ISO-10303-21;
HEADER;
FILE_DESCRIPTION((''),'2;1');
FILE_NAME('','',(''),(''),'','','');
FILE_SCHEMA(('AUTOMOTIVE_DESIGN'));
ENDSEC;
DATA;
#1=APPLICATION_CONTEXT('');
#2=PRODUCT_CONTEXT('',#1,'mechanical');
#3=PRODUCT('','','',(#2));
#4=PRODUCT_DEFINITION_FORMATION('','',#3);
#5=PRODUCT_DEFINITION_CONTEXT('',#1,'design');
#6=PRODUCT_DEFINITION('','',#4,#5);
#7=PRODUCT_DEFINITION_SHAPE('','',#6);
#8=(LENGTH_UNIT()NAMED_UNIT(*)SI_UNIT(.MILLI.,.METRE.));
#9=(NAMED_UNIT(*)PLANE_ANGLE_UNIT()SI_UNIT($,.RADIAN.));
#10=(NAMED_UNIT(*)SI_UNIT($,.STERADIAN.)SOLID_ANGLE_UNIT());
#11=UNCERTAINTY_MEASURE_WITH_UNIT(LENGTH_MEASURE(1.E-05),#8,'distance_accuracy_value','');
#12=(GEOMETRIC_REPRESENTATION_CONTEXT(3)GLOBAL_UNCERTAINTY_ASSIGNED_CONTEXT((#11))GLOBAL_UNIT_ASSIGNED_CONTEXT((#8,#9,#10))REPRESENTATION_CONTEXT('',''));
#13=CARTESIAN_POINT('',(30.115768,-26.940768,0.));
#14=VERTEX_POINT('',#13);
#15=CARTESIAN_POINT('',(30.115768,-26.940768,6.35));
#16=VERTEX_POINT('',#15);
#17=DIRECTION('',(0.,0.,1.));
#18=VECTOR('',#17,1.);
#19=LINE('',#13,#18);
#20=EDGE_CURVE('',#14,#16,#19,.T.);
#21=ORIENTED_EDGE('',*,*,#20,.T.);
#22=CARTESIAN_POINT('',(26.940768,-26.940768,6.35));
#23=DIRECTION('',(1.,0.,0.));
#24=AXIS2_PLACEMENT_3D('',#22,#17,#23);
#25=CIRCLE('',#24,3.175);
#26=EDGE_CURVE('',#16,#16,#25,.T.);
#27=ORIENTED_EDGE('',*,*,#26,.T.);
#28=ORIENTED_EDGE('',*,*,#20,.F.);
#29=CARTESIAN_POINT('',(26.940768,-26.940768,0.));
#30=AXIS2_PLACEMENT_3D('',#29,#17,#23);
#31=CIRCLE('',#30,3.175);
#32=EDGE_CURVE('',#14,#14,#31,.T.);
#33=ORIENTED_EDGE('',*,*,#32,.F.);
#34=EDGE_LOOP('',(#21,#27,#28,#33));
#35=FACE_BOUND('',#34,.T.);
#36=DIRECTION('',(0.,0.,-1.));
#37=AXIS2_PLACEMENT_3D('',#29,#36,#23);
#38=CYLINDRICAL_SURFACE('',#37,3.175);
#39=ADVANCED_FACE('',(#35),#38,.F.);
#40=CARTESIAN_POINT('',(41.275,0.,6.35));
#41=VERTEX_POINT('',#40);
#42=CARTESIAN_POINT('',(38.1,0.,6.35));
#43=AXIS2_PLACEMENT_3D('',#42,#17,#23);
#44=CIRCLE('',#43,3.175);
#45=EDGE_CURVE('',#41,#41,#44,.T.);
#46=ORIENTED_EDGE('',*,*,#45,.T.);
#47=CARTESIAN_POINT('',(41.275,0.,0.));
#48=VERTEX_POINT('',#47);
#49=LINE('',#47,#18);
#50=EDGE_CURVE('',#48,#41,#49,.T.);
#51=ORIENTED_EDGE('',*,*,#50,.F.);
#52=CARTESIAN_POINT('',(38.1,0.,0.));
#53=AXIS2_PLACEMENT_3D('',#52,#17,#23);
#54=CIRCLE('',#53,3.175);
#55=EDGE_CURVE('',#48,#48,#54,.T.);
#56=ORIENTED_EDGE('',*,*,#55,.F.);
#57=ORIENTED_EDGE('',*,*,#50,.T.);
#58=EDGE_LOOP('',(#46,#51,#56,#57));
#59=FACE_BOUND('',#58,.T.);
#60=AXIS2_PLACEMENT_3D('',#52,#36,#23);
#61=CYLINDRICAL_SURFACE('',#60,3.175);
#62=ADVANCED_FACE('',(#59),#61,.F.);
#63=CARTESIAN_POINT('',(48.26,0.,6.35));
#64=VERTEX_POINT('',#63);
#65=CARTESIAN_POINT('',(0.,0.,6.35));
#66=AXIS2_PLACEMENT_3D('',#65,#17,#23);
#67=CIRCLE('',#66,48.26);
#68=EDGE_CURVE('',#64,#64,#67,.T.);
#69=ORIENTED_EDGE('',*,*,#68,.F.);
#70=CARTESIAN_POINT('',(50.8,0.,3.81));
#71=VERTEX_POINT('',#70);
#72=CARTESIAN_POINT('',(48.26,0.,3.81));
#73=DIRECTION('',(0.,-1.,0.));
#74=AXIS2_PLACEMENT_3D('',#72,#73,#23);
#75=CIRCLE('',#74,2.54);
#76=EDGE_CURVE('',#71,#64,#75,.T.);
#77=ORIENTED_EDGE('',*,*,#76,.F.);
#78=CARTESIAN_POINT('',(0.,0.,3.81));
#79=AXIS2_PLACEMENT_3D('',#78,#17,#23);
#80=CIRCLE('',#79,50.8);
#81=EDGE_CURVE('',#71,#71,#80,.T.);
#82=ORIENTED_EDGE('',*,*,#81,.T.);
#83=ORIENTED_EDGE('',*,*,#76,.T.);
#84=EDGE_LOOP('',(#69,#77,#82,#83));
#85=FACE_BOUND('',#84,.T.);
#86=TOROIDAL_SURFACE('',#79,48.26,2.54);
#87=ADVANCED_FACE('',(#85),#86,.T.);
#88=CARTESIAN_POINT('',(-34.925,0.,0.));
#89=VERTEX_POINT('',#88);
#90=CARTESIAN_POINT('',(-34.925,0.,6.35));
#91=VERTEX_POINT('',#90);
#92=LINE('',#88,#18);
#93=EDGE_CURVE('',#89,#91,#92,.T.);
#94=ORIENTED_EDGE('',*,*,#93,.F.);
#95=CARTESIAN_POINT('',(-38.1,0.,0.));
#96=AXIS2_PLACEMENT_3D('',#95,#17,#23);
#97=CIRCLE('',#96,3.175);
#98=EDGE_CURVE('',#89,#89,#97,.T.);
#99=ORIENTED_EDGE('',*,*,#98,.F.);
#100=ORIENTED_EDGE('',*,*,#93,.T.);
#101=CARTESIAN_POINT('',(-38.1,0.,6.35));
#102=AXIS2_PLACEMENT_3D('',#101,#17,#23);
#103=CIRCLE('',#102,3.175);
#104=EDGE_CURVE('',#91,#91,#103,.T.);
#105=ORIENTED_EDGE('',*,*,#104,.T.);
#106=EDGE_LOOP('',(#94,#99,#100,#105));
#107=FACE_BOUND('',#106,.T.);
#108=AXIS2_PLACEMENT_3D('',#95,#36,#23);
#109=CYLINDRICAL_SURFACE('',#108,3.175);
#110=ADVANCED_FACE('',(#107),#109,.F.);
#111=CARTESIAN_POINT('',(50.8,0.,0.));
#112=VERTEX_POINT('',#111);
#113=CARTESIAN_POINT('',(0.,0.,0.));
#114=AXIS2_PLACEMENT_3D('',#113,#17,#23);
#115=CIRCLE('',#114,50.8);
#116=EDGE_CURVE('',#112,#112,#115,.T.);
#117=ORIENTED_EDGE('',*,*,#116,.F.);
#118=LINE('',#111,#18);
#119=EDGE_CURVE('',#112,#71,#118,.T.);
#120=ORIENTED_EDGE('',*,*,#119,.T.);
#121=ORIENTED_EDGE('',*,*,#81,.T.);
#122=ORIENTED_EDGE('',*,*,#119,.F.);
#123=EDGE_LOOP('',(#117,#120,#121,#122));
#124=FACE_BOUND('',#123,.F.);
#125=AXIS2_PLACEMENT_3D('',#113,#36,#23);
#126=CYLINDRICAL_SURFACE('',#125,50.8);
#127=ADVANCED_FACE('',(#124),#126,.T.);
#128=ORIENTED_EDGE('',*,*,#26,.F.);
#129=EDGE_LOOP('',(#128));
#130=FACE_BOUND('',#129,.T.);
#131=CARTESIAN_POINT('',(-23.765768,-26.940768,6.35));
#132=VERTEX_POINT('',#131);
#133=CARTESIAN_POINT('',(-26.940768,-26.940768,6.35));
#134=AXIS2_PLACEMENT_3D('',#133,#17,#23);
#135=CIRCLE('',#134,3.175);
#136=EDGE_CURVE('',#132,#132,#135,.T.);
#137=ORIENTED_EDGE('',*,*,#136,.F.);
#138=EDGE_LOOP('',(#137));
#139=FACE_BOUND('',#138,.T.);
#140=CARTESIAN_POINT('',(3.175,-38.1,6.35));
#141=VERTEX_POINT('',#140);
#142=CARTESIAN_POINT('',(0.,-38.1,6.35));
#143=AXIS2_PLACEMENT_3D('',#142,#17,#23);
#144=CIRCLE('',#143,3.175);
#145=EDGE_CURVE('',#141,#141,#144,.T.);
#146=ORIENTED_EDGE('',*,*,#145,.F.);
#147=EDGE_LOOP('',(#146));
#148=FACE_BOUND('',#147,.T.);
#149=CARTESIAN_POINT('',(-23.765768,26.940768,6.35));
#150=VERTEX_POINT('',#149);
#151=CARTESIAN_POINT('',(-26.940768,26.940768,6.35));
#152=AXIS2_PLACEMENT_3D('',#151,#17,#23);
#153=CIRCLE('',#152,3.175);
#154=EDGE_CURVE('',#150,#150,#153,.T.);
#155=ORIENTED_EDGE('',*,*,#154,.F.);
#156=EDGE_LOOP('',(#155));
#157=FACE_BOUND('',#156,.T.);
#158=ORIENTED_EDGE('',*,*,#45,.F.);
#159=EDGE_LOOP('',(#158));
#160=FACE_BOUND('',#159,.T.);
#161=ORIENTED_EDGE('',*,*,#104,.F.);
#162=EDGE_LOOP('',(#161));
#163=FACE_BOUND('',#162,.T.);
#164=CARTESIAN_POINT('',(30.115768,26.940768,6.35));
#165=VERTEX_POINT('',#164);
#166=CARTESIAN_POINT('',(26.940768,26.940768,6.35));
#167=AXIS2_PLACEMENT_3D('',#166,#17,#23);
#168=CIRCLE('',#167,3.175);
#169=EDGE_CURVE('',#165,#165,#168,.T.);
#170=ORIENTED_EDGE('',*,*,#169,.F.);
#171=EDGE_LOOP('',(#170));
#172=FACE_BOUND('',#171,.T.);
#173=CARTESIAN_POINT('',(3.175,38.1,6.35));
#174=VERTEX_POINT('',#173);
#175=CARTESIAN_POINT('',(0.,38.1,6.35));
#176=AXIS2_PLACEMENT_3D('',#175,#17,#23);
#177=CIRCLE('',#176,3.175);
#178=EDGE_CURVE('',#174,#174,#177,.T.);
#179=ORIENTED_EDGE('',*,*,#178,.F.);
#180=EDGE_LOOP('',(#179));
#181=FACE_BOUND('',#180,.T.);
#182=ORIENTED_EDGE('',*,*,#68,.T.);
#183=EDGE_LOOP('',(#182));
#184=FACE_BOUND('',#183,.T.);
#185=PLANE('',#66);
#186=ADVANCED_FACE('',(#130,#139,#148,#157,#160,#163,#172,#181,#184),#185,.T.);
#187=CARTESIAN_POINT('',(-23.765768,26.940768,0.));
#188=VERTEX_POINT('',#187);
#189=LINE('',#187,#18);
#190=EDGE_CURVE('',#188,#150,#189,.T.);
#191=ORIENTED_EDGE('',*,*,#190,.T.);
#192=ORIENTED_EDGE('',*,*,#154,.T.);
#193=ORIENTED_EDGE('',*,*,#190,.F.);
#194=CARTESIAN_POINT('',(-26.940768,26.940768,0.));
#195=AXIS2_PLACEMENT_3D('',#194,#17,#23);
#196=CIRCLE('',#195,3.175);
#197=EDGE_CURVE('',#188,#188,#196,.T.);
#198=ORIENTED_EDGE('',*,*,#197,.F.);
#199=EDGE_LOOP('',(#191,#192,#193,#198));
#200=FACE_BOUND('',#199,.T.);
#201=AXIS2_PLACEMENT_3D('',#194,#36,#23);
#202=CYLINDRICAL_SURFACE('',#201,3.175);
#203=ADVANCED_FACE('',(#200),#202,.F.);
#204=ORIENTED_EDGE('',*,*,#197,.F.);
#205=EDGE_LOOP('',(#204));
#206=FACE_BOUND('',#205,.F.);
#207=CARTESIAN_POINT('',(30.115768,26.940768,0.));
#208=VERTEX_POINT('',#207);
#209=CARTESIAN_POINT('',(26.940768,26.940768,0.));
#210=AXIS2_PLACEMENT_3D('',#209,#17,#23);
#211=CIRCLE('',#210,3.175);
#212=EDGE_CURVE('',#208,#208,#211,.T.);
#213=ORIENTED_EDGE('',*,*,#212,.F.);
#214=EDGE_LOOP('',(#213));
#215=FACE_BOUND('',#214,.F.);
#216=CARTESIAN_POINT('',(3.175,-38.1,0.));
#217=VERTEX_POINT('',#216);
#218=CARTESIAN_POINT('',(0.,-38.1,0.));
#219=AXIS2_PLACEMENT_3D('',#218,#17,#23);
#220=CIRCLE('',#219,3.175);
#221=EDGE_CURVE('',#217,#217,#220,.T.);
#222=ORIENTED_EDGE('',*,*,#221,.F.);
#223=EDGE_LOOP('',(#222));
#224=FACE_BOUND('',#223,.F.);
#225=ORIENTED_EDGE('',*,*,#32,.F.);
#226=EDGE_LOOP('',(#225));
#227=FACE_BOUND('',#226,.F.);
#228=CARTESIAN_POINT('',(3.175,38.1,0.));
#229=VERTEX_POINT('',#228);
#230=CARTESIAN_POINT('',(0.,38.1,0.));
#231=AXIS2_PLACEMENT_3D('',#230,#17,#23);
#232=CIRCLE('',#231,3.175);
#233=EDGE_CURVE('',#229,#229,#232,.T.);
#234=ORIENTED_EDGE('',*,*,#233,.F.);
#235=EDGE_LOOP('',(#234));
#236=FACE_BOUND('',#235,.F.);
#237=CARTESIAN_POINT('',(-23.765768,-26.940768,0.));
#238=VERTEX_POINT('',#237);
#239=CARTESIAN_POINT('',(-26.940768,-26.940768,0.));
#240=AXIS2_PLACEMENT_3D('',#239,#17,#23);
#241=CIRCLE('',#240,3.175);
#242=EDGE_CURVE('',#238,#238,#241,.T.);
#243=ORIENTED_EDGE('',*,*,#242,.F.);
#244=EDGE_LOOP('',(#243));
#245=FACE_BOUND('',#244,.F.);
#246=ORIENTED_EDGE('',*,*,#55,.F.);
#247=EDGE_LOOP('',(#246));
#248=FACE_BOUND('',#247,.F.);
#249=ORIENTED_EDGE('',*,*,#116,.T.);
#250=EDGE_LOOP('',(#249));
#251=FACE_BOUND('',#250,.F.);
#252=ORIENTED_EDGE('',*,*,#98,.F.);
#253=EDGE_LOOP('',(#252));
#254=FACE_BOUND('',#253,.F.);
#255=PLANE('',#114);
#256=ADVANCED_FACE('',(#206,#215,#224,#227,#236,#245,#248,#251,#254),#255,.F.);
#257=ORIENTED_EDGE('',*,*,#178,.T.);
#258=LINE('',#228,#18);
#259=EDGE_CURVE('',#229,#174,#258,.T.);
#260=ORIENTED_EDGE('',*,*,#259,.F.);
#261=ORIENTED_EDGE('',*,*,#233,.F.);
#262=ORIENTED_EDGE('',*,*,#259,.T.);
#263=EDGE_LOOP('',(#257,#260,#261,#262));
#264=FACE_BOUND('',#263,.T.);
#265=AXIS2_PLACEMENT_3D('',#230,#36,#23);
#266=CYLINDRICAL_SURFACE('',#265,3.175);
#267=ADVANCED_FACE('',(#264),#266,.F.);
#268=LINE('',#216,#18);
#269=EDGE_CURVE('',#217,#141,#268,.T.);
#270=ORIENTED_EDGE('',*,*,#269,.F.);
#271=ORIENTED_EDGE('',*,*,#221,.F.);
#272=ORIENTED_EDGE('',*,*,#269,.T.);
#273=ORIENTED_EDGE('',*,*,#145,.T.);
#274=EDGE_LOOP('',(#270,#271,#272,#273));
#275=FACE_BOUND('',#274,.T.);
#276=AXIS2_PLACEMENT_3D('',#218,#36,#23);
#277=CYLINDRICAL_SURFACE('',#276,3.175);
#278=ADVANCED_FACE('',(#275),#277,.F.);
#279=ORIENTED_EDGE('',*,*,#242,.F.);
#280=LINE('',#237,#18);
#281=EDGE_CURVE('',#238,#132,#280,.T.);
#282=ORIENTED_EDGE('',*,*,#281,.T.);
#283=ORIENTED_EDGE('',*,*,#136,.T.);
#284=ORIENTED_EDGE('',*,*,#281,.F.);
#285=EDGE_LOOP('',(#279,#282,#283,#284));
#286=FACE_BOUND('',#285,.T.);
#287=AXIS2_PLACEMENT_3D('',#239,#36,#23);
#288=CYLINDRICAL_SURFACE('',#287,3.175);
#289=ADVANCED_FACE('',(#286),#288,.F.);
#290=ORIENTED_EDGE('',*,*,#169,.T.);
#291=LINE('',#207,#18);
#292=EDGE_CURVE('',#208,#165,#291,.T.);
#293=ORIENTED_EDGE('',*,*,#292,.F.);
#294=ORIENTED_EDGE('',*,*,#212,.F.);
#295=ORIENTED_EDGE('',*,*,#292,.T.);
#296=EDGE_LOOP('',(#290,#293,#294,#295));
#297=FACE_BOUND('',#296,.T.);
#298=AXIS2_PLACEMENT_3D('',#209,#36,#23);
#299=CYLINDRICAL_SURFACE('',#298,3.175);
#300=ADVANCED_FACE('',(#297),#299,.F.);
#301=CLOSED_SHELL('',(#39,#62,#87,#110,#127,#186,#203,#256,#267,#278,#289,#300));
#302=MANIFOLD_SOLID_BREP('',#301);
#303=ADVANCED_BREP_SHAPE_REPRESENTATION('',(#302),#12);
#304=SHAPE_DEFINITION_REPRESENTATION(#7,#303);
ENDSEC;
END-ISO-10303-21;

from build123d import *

# Parameters (mm, degrees)
F0_R     = 50.8
F0_R_2   = 3.175
F1_DEPTH = 6.35
F10_R    = 2.54


# Not quite as in the source:
# - the program builds the solid bodies; features that only make, move or delete a surface that nothing else refers to are left out


with BuildPart() as f1:
    # F0 (on Top) → F1 (new body)
    with BuildSketch(Plane.XY):
        Circle(F0_R)
        with Locations((-26.9407683632, -26.9407683632)):
            Circle(F0_R_2, mode=Mode.SUBTRACT)
        with Locations((0, -38.1)):
            Circle(F0_R_2, mode=Mode.SUBTRACT)
        with Locations((-38.1, 0)):
            Circle(F0_R_2, mode=Mode.SUBTRACT)
        with Locations((26.9407683632, -26.9407683632)):
            Circle(F0_R_2, mode=Mode.SUBTRACT)
        with Locations((38.1, 0)):
            Circle(F0_R_2, mode=Mode.SUBTRACT)
        with Locations((-26.9407683632, 26.9407683632)):
            Circle(F0_R_2, mode=Mode.SUBTRACT)
        with Locations((0, 38.1)):
            Circle(F0_R_2, mode=Mode.SUBTRACT)
        with Locations((26.9407683632, 26.9407683632)):
            Circle(F0_R_2, mode=Mode.SUBTRACT)
    extrude(amount=F1_DEPTH)

    # F10
    f10_edges = [f1.edges().sort_by_distance(p)[0] for p in [
        (-50.8, 0, 6.35),
    ]]
    fillet(f10_edges, radius=F10_R)


solid = f1.part
